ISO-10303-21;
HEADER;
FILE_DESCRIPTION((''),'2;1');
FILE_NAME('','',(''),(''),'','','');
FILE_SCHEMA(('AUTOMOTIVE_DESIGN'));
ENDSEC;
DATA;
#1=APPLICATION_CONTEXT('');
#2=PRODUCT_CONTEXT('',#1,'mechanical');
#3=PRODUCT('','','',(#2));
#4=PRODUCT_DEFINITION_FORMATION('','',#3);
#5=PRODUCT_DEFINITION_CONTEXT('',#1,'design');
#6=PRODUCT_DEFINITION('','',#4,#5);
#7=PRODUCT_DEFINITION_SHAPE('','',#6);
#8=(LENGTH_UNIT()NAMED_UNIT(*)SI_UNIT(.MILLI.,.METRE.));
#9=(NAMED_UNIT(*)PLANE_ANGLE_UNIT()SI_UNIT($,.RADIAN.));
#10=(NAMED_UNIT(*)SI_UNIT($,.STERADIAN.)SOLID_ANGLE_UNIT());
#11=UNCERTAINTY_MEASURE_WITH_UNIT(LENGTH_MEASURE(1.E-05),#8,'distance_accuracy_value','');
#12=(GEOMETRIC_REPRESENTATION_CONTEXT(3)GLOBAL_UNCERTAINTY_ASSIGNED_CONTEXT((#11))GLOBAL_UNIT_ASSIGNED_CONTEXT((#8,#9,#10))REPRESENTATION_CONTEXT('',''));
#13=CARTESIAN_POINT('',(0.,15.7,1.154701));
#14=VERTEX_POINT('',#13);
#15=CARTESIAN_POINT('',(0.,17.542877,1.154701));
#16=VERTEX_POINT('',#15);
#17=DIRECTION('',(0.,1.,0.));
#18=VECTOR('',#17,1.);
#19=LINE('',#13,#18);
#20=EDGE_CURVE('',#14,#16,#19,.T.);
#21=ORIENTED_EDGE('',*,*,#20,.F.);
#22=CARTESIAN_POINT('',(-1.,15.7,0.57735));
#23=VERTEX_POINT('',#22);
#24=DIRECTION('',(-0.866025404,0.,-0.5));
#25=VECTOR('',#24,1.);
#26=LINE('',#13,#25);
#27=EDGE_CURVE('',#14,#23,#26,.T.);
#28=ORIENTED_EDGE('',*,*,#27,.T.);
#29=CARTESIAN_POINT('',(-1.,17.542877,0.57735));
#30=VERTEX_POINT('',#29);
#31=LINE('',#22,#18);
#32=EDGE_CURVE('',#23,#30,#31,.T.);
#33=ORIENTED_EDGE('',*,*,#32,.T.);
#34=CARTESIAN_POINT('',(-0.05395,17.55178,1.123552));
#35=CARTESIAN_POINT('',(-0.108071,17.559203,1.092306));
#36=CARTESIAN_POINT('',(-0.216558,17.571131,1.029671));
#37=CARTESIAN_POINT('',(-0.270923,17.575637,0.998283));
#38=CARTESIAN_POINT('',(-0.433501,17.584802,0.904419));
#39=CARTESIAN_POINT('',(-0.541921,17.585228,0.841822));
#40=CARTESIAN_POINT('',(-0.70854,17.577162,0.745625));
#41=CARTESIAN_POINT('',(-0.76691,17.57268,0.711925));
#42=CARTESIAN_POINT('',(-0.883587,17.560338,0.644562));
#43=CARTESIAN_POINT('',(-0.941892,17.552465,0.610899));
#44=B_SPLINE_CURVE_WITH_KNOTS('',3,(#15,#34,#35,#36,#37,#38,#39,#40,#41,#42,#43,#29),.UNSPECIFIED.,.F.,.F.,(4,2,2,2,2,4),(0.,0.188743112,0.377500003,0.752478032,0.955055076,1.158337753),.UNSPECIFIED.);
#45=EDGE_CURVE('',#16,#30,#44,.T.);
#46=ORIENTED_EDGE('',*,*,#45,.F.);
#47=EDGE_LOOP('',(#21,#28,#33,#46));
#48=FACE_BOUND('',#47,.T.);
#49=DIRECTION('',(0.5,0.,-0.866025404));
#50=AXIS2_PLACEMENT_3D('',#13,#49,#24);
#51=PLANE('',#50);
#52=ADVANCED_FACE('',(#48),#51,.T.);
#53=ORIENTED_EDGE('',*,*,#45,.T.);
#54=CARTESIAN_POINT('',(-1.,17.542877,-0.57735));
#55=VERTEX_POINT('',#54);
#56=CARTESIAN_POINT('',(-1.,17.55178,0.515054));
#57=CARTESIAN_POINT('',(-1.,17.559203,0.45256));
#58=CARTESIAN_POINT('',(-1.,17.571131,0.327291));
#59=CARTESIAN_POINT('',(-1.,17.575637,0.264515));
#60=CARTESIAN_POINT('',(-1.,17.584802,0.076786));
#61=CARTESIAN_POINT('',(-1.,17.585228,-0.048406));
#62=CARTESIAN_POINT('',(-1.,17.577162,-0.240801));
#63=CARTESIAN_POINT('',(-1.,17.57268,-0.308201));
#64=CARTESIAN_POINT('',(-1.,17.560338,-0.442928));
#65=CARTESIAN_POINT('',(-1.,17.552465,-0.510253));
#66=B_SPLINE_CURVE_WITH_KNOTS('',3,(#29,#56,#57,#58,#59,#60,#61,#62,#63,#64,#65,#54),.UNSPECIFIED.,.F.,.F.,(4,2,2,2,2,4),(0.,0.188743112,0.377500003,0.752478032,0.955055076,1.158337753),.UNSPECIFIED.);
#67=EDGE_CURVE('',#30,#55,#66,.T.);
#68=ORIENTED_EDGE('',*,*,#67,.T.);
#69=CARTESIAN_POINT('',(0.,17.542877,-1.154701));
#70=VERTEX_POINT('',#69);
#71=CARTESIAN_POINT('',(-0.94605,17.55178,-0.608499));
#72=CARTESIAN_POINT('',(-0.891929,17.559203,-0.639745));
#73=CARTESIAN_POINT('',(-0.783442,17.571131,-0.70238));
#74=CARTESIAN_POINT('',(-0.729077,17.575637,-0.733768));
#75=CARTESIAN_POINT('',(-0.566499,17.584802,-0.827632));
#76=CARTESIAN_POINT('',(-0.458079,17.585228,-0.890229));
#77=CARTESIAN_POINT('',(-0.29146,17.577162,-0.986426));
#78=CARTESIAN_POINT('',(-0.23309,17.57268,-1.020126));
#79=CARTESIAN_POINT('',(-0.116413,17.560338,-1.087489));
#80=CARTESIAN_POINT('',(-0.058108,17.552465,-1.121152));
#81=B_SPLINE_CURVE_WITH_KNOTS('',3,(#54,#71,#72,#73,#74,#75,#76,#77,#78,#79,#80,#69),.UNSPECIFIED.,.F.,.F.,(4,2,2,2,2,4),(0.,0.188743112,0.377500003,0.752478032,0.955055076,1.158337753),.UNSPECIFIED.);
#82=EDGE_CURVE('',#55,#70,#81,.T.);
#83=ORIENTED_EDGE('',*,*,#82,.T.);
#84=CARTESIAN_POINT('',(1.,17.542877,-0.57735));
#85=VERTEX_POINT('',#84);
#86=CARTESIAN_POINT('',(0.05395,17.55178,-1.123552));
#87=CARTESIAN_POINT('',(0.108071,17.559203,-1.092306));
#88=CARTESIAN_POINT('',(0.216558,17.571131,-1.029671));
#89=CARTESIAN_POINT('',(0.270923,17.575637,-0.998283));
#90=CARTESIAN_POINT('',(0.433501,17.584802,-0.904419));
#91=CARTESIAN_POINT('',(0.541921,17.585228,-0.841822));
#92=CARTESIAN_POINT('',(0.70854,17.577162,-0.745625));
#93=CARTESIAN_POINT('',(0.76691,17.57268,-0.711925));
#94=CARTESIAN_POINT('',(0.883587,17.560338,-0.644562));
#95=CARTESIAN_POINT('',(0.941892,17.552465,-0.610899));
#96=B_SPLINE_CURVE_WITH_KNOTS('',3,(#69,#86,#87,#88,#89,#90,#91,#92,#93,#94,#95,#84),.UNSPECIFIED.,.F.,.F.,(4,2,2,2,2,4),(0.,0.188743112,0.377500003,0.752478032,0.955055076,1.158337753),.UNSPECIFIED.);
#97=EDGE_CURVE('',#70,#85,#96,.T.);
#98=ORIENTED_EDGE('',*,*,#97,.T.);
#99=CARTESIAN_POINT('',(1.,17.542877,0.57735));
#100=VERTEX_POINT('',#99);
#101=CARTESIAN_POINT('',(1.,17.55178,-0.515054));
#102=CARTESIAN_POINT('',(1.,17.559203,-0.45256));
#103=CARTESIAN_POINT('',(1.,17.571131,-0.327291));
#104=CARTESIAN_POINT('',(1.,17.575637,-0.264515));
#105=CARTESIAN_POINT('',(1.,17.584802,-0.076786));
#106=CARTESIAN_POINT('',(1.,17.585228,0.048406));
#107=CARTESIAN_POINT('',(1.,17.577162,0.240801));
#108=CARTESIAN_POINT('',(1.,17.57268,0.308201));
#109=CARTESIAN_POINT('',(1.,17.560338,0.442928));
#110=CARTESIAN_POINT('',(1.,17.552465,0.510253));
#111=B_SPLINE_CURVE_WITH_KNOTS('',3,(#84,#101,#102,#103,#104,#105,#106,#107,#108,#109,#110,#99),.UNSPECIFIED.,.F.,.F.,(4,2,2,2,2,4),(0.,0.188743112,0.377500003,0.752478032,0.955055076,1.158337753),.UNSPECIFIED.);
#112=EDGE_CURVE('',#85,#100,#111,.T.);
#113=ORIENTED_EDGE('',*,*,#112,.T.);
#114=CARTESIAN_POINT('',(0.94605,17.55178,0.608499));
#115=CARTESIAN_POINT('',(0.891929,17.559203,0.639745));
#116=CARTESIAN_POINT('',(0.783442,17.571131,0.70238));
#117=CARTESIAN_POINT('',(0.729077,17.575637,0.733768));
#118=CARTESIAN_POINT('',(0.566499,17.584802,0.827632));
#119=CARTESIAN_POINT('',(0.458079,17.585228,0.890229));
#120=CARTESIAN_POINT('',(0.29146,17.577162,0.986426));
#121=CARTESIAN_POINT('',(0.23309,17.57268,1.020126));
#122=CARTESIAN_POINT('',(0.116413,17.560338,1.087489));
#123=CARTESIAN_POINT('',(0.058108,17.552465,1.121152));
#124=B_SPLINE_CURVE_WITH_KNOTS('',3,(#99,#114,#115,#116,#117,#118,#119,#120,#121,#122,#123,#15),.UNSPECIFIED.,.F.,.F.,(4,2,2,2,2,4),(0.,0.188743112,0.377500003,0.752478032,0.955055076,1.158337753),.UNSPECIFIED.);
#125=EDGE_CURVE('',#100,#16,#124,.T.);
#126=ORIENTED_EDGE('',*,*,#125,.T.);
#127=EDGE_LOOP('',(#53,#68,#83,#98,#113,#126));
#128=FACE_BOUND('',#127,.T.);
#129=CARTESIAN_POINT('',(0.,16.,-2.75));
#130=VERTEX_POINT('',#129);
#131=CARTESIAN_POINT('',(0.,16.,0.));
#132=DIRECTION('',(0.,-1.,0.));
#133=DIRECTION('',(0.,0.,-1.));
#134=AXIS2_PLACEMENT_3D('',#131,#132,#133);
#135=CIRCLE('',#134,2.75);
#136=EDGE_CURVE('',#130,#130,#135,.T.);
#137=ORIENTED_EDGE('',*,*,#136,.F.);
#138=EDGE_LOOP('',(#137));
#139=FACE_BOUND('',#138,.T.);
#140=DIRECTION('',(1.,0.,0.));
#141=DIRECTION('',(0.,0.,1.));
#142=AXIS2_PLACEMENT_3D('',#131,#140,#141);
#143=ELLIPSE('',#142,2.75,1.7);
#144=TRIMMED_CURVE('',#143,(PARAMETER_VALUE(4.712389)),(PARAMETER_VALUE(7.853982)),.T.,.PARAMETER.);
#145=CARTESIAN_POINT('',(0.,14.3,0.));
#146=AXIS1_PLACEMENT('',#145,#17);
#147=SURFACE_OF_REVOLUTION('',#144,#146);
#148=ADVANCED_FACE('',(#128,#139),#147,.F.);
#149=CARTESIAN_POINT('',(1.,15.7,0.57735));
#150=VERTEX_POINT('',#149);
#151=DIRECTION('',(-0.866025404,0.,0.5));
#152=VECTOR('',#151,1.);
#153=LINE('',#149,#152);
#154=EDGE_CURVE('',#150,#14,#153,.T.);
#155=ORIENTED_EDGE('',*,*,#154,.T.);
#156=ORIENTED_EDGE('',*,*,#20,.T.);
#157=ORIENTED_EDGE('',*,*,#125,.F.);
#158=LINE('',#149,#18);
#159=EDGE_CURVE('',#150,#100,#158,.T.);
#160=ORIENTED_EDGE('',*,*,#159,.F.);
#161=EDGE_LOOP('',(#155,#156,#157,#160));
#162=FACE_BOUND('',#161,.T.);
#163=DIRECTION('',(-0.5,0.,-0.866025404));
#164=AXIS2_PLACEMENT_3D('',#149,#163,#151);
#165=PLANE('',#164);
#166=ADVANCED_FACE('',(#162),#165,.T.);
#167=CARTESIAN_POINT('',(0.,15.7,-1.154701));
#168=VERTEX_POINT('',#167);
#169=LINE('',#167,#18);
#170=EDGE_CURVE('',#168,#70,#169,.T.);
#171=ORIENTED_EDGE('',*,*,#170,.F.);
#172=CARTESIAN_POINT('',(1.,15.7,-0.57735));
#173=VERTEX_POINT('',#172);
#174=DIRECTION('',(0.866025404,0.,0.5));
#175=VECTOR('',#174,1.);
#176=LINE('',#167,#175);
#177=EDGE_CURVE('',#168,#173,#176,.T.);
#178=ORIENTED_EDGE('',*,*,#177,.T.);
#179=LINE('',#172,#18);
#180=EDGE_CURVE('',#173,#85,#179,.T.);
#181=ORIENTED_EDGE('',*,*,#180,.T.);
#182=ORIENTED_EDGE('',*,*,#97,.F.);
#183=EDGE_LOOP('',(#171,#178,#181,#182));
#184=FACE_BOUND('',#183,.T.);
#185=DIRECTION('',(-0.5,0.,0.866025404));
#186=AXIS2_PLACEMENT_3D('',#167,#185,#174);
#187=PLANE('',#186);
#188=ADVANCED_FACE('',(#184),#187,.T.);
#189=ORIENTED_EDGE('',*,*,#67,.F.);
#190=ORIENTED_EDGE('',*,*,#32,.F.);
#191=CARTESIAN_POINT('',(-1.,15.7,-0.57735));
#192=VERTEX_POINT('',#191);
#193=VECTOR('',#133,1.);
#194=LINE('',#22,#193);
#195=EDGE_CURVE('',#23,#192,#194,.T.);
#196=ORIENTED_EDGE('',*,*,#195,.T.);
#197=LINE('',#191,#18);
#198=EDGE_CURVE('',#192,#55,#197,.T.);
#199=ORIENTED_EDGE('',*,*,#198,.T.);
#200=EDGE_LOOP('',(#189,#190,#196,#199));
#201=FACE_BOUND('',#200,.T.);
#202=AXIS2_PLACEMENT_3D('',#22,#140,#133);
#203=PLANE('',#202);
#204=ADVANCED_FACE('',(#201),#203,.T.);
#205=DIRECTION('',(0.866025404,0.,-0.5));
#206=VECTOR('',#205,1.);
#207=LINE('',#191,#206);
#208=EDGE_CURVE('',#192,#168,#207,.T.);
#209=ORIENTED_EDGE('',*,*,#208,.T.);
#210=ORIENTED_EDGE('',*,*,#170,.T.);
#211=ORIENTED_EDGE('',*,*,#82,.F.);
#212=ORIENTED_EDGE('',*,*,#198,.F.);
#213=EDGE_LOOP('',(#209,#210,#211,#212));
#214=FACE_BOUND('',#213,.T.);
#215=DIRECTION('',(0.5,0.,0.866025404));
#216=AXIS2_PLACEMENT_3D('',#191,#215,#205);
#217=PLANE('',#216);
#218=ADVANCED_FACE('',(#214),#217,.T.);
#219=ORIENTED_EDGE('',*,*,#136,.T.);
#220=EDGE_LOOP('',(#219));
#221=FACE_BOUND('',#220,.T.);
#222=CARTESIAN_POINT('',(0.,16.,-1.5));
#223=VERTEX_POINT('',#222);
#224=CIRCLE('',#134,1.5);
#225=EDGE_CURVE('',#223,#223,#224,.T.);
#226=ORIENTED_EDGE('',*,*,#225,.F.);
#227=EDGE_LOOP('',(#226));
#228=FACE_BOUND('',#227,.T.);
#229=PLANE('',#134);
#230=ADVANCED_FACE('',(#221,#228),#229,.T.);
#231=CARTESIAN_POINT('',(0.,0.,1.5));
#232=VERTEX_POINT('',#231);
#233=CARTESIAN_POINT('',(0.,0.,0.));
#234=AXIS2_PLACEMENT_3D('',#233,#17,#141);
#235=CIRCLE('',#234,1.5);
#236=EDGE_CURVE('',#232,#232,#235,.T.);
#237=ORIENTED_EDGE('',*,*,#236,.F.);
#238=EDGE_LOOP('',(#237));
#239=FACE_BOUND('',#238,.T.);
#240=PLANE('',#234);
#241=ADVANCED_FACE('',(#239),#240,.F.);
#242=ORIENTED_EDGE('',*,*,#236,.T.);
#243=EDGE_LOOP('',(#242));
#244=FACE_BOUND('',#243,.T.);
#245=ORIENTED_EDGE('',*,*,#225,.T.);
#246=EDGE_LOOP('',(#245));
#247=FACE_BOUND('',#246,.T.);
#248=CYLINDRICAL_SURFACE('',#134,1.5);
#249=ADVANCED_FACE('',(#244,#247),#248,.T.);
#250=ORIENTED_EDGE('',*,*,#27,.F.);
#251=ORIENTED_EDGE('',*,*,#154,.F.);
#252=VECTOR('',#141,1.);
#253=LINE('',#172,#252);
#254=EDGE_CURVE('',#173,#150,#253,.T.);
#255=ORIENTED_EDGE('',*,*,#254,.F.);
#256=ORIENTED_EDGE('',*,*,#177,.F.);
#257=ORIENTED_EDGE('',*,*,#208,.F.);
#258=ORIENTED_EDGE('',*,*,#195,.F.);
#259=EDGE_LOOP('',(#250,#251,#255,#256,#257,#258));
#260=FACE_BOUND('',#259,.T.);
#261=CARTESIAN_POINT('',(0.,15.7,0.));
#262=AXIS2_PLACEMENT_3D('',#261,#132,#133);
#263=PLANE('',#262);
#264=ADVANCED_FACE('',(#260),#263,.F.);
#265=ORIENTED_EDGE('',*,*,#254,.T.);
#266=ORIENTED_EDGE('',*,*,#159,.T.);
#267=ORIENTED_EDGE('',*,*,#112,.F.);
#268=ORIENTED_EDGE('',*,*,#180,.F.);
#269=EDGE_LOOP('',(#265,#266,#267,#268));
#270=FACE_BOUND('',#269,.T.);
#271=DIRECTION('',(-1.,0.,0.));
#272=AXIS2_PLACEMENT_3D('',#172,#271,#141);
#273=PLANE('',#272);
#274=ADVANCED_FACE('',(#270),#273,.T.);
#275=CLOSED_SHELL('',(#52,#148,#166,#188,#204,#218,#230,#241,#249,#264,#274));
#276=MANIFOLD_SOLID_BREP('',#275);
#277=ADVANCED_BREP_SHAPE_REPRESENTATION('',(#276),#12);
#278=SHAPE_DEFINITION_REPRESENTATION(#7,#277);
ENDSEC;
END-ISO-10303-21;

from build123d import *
from build123d.topology import SkipClean

# Parameters (mm, degrees)
SKETCH1_R           = 1.5
BOSS_EXTRUDE1_DEPTH = 16
SKETCH2_R           = 2.75
BOSS_EXTRUDE2_DEPTH = 0.1
SKETCH3_R           = 2.75
SKETCH3_R_2         = 1.5
CUT_EXTRUDE1_DEPTH  = 0.1
CUT_EXTRUDE2_DEPTH  = 2


# Read off the part's stored shape, not the designer's step: Dome1
with BuildPart() as part:
    # Sketch1 → Boss-Extrude1 (new body)
    with BuildSketch(Plane(origin=(0, 0, 0), x_dir=(1, 0, 0), z_dir=(0, 1, 0))):
        with Locations(Location((0, 0, 0), (0, 0, 270))):
            Circle(SKETCH1_R)
    extrude(amount=BOSS_EXTRUDE1_DEPTH)

    # Sketch2 → Boss-Extrude2 (add)
    with BuildSketch(Plane(origin=(0, 16, 0), x_dir=(1, 0, 0), z_dir=(0, 1, 0))):
        with Locations(Location((0, 0, 0), (0, 0, 270))):
            Circle(SKETCH2_R)
    extrude(amount=-BOSS_EXTRUDE2_DEPTH)

    # Dome1 outline → Dome1 (revolve)
    with BuildSketch(Plane.XY):
        with BuildLine():
            add(Edge.make_bspline(
                [(0, 17.7), (2.75, 17.7), (2.75, 16)],
                knots=[4.71238898, 4.71238898, 4.71238898, 6.283185307, 6.283185307, 6.283185307], degree=2, weights=[1, 0.707106781, 1]))
            Line((0, 17.7), (0, 16))
            Line((0, 16), (2.75, 16))
        make_face()
    revolve(axis=Axis((0, 0, 0), (0, 1, 0)))

    # Sketch3 → Cut-Extrude1 (cut)
    with SkipClean():  # the faces are left unmerged after this step: merging them gives an invalid solid
        with BuildSketch(Plane.XZ.offset(-15.9)):
            Circle(SKETCH3_R)
            with Locations(Location((0, 0, 0), (0, 0, 270))):
                Circle(SKETCH3_R_2, mode=Mode.SUBTRACT)
        extrude(amount=-CUT_EXTRUDE1_DEPTH, mode=Mode.SUBTRACT)

    # Sketch4 → Cut-Extrude2 (cut)
    with SkipClean():  # the faces are left unmerged after this step: merging them gives an invalid solid
        with BuildSketch(Plane(origin=(0, 17.7, 0), x_dir=(-1, 0, 0), z_dir=(0, -1, 0))):
            Polygon((0, 1.154700538), (-1, 0.577350269), (-1, -0.577350269), (0, -1.154700538), (1, -0.577350269), (1, 0.577350269), align=None)
        extrude(amount=CUT_EXTRUDE2_DEPTH, mode=Mode.SUBTRACT)


solid = part.part
